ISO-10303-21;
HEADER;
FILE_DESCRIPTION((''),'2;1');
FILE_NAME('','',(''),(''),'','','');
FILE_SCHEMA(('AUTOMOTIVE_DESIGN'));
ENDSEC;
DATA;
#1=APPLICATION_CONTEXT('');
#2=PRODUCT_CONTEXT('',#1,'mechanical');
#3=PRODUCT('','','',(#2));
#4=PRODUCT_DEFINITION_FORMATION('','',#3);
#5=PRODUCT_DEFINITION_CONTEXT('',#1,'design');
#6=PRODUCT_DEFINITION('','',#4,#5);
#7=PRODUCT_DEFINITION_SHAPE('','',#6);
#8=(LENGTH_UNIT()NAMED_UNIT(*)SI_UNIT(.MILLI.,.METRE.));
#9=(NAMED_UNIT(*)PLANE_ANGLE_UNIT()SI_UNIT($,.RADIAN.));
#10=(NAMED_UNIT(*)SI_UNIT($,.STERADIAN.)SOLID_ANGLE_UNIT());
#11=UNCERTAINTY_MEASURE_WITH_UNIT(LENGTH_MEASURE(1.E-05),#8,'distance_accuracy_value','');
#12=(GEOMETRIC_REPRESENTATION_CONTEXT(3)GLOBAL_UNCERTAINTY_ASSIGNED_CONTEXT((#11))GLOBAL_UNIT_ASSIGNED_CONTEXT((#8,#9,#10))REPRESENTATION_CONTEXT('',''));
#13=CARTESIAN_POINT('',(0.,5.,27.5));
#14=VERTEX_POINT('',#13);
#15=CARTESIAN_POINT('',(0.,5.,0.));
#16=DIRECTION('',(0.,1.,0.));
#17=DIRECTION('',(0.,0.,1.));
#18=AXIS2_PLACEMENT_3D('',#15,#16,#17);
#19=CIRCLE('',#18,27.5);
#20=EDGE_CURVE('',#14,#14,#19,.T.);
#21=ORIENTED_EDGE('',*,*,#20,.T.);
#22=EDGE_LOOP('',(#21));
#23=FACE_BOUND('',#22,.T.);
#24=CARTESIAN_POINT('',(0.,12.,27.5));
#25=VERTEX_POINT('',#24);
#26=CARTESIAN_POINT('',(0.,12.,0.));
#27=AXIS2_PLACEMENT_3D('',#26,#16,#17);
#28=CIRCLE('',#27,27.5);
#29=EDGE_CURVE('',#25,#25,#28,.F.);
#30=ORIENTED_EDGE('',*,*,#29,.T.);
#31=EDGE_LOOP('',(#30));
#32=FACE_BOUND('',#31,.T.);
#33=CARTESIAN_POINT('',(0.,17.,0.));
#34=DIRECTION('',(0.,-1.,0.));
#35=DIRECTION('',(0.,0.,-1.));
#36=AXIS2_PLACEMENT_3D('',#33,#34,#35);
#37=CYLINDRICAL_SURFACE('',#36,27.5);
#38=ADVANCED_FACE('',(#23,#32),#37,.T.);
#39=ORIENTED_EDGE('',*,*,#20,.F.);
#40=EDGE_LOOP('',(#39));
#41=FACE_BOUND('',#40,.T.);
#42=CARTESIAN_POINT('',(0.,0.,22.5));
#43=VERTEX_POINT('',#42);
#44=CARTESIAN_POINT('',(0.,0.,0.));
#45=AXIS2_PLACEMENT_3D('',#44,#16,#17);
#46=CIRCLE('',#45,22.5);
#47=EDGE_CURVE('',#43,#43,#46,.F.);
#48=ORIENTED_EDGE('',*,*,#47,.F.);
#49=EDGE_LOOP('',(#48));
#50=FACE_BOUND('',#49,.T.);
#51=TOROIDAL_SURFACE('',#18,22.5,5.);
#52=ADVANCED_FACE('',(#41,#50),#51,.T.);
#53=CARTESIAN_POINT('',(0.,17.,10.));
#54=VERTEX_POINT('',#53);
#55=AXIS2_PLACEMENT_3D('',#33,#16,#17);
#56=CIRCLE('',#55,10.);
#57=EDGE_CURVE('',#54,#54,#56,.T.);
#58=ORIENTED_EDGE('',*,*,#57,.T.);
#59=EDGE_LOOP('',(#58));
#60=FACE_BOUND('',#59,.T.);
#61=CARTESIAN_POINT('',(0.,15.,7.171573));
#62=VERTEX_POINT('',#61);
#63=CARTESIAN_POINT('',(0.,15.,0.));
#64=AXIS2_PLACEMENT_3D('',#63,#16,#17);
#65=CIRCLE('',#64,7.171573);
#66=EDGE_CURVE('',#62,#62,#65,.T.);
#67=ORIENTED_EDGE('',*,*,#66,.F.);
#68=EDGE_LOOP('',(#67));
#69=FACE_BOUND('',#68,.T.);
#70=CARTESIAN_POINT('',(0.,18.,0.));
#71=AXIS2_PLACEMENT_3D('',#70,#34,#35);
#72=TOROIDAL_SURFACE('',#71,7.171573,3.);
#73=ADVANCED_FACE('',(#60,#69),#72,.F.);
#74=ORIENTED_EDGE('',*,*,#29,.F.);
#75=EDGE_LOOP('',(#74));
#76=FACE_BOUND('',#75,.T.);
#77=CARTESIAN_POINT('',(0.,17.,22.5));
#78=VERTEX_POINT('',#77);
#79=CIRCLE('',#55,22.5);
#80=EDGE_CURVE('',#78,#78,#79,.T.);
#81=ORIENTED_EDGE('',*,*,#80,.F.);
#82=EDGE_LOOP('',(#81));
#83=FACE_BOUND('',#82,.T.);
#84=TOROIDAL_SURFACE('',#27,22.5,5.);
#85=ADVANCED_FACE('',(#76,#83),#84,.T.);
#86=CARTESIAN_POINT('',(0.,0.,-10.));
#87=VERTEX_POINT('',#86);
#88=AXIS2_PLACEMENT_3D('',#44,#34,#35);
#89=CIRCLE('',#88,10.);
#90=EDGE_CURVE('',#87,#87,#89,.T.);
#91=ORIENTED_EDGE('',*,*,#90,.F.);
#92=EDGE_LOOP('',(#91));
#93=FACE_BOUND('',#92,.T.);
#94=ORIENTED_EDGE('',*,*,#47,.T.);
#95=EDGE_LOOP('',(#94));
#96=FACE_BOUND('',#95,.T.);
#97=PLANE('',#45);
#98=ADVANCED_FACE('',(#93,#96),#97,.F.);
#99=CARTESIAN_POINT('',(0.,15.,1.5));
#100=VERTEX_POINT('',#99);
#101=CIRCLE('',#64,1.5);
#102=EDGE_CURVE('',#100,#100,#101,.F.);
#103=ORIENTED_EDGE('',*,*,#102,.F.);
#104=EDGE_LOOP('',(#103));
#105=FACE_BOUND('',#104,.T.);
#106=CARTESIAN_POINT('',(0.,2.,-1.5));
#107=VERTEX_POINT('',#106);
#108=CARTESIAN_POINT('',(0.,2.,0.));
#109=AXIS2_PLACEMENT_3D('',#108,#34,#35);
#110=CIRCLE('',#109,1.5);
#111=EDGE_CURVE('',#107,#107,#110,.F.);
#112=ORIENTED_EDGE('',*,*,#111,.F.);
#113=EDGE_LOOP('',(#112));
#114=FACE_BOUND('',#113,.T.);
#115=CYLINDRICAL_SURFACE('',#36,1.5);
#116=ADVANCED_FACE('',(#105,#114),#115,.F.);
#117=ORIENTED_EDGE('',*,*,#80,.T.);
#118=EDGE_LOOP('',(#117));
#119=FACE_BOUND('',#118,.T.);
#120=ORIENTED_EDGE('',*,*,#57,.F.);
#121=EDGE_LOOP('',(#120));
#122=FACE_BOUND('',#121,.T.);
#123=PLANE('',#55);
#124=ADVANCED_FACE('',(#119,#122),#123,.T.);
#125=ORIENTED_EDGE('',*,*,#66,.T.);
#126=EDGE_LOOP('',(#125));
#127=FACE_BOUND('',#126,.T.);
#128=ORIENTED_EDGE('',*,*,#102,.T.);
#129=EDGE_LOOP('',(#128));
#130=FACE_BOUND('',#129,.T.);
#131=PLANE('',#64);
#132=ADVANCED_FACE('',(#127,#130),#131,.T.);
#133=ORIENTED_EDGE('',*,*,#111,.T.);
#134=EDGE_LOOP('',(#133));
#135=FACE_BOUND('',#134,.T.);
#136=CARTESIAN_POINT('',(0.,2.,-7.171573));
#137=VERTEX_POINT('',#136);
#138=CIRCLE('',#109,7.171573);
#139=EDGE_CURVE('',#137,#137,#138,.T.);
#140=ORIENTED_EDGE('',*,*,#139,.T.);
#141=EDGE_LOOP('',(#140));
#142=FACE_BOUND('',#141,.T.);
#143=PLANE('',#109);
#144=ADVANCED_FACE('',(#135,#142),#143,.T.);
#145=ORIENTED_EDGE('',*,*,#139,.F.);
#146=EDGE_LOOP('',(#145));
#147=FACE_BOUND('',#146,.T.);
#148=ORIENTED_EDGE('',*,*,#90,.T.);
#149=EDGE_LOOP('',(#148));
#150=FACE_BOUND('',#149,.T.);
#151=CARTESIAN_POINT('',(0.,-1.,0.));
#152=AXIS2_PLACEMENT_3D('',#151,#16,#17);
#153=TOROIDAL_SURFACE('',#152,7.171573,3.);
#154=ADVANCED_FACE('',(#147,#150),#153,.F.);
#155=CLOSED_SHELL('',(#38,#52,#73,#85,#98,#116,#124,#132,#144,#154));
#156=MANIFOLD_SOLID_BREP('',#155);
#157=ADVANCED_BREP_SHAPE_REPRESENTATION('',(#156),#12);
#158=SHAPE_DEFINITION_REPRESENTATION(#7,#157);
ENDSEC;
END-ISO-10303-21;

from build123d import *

# Parameters (mm, degrees)
SKETCH_1_R          = 27.5
EXTRUDE_1_DEPTH     = 17
FILLET_1_R          = 5
SKETCH_2_R          = 1.5
CUT_EXTRUDE_1_DEPTH = 43.444080989
SKETCH_3_R          = 10
CUT_EXTRUDE_2_DEPTH = 2
CUT_EXTRUDE_START   = -2
SKETCH_4_R          = 10
CUT_EXTRUDE_3_DEPTH = 2
FILLET_2_R          = 3


with BuildPart() as part:
    # 草图1 → 凸台-拉伸1 (new body)
    with BuildSketch(Plane(origin=(0, 0, 0), x_dir=(1, 0, 0), z_dir=(0, 1, 0))):
        with Locations(Location((0, 0, 0), (0, 0, 270))):
            Circle(SKETCH_1_R)
    extrude(amount=EXTRUDE_1_DEPTH)

    # 圆角1
    fillet_1_edges = [part.edges().sort_by_distance(p)[0] for p in [
        (0, 0, -27.5),
        (0, 17, -27.5),
    ]]
    fillet(fillet_1_edges, radius=FILLET_1_R)

    # 草图2 → 切除-拉伸1 (cut, through all)
    with BuildSketch(Plane.XZ):
        with Locations(Location((0, 0, 0), (0, 0, 270))):
            Circle(SKETCH_2_R)
    extrude(amount=-CUT_EXTRUDE_1_DEPTH, mode=Mode.SUBTRACT)

    # 草图3 → 切除-拉伸2 (cut)
    with BuildSketch(Plane(origin=(0, 17, 0), x_dir=(1, 0, 0), z_dir=(0, 1, 0))):
        with Locations(Location((0, 0, 0), (0, 0, 270))):
            Circle(SKETCH_3_R)
    extrude(amount=-CUT_EXTRUDE_2_DEPTH, mode=Mode.SUBTRACT)

    # 草图4 → 切除-拉伸3 (cut)
    with BuildSketch(Plane.XZ.offset(CUT_EXTRUDE_START)):
        with Locations(Location((0, 0, 0), (0, 0, 90))):
            Circle(SKETCH_4_R)
    extrude(amount=CUT_EXTRUDE_3_DEPTH, mode=Mode.SUBTRACT)

    # 圆角2
    # the kernel refuses this fillet: 3 mm, written as the material it adds along each edge
    with BuildSketch(Plane(origin=(0, 15, 0), x_dir=(0, 0, 1), z_dir=(-1, 0, 0))) as fillet_2_piece_1:
        with BuildLine():
            CenterArc((7.171572875, 3), FILLET_2_R, 270, 70.528779366)
            Line((7.171572875, 0), (7.171572875, -0.06))
            Line((7.171572875, -0.06), (10, -0.06))
            Line((10, -0.06), (10.06, 0))
            ThreePointArc((10.06, 0), (10.06, 1), (10.056568542, 1.98))
            Line((10.056568542, 1.98), (10, 2))
        make_face()
    revolve(axis=Axis((0, 15, 0), (0, 1, 0)))
    with BuildSketch(Plane(origin=(0, 2, 0), x_dir=(0, 0, 1), z_dir=(1, 0, 0))) as fillet_2_piece_2:
        with BuildLine():
            CenterArc((7.171572875, 3), FILLET_2_R, 270, 70.528779366)
            Line((7.171572875, 0), (7.171572875, -0.06))
            Line((7.171572875, -0.06), (10, -0.06))
            Line((10, -0.06), (10.06, 0))
            ThreePointArc((10.06, 0), (10.06, 1), (10.056568542, 1.98))
            Line((10.056568542, 1.98), (10, 2))
        make_face()
    revolve(axis=Axis((0, 2, 0), (0, -1, 0)))


solid = part.part
